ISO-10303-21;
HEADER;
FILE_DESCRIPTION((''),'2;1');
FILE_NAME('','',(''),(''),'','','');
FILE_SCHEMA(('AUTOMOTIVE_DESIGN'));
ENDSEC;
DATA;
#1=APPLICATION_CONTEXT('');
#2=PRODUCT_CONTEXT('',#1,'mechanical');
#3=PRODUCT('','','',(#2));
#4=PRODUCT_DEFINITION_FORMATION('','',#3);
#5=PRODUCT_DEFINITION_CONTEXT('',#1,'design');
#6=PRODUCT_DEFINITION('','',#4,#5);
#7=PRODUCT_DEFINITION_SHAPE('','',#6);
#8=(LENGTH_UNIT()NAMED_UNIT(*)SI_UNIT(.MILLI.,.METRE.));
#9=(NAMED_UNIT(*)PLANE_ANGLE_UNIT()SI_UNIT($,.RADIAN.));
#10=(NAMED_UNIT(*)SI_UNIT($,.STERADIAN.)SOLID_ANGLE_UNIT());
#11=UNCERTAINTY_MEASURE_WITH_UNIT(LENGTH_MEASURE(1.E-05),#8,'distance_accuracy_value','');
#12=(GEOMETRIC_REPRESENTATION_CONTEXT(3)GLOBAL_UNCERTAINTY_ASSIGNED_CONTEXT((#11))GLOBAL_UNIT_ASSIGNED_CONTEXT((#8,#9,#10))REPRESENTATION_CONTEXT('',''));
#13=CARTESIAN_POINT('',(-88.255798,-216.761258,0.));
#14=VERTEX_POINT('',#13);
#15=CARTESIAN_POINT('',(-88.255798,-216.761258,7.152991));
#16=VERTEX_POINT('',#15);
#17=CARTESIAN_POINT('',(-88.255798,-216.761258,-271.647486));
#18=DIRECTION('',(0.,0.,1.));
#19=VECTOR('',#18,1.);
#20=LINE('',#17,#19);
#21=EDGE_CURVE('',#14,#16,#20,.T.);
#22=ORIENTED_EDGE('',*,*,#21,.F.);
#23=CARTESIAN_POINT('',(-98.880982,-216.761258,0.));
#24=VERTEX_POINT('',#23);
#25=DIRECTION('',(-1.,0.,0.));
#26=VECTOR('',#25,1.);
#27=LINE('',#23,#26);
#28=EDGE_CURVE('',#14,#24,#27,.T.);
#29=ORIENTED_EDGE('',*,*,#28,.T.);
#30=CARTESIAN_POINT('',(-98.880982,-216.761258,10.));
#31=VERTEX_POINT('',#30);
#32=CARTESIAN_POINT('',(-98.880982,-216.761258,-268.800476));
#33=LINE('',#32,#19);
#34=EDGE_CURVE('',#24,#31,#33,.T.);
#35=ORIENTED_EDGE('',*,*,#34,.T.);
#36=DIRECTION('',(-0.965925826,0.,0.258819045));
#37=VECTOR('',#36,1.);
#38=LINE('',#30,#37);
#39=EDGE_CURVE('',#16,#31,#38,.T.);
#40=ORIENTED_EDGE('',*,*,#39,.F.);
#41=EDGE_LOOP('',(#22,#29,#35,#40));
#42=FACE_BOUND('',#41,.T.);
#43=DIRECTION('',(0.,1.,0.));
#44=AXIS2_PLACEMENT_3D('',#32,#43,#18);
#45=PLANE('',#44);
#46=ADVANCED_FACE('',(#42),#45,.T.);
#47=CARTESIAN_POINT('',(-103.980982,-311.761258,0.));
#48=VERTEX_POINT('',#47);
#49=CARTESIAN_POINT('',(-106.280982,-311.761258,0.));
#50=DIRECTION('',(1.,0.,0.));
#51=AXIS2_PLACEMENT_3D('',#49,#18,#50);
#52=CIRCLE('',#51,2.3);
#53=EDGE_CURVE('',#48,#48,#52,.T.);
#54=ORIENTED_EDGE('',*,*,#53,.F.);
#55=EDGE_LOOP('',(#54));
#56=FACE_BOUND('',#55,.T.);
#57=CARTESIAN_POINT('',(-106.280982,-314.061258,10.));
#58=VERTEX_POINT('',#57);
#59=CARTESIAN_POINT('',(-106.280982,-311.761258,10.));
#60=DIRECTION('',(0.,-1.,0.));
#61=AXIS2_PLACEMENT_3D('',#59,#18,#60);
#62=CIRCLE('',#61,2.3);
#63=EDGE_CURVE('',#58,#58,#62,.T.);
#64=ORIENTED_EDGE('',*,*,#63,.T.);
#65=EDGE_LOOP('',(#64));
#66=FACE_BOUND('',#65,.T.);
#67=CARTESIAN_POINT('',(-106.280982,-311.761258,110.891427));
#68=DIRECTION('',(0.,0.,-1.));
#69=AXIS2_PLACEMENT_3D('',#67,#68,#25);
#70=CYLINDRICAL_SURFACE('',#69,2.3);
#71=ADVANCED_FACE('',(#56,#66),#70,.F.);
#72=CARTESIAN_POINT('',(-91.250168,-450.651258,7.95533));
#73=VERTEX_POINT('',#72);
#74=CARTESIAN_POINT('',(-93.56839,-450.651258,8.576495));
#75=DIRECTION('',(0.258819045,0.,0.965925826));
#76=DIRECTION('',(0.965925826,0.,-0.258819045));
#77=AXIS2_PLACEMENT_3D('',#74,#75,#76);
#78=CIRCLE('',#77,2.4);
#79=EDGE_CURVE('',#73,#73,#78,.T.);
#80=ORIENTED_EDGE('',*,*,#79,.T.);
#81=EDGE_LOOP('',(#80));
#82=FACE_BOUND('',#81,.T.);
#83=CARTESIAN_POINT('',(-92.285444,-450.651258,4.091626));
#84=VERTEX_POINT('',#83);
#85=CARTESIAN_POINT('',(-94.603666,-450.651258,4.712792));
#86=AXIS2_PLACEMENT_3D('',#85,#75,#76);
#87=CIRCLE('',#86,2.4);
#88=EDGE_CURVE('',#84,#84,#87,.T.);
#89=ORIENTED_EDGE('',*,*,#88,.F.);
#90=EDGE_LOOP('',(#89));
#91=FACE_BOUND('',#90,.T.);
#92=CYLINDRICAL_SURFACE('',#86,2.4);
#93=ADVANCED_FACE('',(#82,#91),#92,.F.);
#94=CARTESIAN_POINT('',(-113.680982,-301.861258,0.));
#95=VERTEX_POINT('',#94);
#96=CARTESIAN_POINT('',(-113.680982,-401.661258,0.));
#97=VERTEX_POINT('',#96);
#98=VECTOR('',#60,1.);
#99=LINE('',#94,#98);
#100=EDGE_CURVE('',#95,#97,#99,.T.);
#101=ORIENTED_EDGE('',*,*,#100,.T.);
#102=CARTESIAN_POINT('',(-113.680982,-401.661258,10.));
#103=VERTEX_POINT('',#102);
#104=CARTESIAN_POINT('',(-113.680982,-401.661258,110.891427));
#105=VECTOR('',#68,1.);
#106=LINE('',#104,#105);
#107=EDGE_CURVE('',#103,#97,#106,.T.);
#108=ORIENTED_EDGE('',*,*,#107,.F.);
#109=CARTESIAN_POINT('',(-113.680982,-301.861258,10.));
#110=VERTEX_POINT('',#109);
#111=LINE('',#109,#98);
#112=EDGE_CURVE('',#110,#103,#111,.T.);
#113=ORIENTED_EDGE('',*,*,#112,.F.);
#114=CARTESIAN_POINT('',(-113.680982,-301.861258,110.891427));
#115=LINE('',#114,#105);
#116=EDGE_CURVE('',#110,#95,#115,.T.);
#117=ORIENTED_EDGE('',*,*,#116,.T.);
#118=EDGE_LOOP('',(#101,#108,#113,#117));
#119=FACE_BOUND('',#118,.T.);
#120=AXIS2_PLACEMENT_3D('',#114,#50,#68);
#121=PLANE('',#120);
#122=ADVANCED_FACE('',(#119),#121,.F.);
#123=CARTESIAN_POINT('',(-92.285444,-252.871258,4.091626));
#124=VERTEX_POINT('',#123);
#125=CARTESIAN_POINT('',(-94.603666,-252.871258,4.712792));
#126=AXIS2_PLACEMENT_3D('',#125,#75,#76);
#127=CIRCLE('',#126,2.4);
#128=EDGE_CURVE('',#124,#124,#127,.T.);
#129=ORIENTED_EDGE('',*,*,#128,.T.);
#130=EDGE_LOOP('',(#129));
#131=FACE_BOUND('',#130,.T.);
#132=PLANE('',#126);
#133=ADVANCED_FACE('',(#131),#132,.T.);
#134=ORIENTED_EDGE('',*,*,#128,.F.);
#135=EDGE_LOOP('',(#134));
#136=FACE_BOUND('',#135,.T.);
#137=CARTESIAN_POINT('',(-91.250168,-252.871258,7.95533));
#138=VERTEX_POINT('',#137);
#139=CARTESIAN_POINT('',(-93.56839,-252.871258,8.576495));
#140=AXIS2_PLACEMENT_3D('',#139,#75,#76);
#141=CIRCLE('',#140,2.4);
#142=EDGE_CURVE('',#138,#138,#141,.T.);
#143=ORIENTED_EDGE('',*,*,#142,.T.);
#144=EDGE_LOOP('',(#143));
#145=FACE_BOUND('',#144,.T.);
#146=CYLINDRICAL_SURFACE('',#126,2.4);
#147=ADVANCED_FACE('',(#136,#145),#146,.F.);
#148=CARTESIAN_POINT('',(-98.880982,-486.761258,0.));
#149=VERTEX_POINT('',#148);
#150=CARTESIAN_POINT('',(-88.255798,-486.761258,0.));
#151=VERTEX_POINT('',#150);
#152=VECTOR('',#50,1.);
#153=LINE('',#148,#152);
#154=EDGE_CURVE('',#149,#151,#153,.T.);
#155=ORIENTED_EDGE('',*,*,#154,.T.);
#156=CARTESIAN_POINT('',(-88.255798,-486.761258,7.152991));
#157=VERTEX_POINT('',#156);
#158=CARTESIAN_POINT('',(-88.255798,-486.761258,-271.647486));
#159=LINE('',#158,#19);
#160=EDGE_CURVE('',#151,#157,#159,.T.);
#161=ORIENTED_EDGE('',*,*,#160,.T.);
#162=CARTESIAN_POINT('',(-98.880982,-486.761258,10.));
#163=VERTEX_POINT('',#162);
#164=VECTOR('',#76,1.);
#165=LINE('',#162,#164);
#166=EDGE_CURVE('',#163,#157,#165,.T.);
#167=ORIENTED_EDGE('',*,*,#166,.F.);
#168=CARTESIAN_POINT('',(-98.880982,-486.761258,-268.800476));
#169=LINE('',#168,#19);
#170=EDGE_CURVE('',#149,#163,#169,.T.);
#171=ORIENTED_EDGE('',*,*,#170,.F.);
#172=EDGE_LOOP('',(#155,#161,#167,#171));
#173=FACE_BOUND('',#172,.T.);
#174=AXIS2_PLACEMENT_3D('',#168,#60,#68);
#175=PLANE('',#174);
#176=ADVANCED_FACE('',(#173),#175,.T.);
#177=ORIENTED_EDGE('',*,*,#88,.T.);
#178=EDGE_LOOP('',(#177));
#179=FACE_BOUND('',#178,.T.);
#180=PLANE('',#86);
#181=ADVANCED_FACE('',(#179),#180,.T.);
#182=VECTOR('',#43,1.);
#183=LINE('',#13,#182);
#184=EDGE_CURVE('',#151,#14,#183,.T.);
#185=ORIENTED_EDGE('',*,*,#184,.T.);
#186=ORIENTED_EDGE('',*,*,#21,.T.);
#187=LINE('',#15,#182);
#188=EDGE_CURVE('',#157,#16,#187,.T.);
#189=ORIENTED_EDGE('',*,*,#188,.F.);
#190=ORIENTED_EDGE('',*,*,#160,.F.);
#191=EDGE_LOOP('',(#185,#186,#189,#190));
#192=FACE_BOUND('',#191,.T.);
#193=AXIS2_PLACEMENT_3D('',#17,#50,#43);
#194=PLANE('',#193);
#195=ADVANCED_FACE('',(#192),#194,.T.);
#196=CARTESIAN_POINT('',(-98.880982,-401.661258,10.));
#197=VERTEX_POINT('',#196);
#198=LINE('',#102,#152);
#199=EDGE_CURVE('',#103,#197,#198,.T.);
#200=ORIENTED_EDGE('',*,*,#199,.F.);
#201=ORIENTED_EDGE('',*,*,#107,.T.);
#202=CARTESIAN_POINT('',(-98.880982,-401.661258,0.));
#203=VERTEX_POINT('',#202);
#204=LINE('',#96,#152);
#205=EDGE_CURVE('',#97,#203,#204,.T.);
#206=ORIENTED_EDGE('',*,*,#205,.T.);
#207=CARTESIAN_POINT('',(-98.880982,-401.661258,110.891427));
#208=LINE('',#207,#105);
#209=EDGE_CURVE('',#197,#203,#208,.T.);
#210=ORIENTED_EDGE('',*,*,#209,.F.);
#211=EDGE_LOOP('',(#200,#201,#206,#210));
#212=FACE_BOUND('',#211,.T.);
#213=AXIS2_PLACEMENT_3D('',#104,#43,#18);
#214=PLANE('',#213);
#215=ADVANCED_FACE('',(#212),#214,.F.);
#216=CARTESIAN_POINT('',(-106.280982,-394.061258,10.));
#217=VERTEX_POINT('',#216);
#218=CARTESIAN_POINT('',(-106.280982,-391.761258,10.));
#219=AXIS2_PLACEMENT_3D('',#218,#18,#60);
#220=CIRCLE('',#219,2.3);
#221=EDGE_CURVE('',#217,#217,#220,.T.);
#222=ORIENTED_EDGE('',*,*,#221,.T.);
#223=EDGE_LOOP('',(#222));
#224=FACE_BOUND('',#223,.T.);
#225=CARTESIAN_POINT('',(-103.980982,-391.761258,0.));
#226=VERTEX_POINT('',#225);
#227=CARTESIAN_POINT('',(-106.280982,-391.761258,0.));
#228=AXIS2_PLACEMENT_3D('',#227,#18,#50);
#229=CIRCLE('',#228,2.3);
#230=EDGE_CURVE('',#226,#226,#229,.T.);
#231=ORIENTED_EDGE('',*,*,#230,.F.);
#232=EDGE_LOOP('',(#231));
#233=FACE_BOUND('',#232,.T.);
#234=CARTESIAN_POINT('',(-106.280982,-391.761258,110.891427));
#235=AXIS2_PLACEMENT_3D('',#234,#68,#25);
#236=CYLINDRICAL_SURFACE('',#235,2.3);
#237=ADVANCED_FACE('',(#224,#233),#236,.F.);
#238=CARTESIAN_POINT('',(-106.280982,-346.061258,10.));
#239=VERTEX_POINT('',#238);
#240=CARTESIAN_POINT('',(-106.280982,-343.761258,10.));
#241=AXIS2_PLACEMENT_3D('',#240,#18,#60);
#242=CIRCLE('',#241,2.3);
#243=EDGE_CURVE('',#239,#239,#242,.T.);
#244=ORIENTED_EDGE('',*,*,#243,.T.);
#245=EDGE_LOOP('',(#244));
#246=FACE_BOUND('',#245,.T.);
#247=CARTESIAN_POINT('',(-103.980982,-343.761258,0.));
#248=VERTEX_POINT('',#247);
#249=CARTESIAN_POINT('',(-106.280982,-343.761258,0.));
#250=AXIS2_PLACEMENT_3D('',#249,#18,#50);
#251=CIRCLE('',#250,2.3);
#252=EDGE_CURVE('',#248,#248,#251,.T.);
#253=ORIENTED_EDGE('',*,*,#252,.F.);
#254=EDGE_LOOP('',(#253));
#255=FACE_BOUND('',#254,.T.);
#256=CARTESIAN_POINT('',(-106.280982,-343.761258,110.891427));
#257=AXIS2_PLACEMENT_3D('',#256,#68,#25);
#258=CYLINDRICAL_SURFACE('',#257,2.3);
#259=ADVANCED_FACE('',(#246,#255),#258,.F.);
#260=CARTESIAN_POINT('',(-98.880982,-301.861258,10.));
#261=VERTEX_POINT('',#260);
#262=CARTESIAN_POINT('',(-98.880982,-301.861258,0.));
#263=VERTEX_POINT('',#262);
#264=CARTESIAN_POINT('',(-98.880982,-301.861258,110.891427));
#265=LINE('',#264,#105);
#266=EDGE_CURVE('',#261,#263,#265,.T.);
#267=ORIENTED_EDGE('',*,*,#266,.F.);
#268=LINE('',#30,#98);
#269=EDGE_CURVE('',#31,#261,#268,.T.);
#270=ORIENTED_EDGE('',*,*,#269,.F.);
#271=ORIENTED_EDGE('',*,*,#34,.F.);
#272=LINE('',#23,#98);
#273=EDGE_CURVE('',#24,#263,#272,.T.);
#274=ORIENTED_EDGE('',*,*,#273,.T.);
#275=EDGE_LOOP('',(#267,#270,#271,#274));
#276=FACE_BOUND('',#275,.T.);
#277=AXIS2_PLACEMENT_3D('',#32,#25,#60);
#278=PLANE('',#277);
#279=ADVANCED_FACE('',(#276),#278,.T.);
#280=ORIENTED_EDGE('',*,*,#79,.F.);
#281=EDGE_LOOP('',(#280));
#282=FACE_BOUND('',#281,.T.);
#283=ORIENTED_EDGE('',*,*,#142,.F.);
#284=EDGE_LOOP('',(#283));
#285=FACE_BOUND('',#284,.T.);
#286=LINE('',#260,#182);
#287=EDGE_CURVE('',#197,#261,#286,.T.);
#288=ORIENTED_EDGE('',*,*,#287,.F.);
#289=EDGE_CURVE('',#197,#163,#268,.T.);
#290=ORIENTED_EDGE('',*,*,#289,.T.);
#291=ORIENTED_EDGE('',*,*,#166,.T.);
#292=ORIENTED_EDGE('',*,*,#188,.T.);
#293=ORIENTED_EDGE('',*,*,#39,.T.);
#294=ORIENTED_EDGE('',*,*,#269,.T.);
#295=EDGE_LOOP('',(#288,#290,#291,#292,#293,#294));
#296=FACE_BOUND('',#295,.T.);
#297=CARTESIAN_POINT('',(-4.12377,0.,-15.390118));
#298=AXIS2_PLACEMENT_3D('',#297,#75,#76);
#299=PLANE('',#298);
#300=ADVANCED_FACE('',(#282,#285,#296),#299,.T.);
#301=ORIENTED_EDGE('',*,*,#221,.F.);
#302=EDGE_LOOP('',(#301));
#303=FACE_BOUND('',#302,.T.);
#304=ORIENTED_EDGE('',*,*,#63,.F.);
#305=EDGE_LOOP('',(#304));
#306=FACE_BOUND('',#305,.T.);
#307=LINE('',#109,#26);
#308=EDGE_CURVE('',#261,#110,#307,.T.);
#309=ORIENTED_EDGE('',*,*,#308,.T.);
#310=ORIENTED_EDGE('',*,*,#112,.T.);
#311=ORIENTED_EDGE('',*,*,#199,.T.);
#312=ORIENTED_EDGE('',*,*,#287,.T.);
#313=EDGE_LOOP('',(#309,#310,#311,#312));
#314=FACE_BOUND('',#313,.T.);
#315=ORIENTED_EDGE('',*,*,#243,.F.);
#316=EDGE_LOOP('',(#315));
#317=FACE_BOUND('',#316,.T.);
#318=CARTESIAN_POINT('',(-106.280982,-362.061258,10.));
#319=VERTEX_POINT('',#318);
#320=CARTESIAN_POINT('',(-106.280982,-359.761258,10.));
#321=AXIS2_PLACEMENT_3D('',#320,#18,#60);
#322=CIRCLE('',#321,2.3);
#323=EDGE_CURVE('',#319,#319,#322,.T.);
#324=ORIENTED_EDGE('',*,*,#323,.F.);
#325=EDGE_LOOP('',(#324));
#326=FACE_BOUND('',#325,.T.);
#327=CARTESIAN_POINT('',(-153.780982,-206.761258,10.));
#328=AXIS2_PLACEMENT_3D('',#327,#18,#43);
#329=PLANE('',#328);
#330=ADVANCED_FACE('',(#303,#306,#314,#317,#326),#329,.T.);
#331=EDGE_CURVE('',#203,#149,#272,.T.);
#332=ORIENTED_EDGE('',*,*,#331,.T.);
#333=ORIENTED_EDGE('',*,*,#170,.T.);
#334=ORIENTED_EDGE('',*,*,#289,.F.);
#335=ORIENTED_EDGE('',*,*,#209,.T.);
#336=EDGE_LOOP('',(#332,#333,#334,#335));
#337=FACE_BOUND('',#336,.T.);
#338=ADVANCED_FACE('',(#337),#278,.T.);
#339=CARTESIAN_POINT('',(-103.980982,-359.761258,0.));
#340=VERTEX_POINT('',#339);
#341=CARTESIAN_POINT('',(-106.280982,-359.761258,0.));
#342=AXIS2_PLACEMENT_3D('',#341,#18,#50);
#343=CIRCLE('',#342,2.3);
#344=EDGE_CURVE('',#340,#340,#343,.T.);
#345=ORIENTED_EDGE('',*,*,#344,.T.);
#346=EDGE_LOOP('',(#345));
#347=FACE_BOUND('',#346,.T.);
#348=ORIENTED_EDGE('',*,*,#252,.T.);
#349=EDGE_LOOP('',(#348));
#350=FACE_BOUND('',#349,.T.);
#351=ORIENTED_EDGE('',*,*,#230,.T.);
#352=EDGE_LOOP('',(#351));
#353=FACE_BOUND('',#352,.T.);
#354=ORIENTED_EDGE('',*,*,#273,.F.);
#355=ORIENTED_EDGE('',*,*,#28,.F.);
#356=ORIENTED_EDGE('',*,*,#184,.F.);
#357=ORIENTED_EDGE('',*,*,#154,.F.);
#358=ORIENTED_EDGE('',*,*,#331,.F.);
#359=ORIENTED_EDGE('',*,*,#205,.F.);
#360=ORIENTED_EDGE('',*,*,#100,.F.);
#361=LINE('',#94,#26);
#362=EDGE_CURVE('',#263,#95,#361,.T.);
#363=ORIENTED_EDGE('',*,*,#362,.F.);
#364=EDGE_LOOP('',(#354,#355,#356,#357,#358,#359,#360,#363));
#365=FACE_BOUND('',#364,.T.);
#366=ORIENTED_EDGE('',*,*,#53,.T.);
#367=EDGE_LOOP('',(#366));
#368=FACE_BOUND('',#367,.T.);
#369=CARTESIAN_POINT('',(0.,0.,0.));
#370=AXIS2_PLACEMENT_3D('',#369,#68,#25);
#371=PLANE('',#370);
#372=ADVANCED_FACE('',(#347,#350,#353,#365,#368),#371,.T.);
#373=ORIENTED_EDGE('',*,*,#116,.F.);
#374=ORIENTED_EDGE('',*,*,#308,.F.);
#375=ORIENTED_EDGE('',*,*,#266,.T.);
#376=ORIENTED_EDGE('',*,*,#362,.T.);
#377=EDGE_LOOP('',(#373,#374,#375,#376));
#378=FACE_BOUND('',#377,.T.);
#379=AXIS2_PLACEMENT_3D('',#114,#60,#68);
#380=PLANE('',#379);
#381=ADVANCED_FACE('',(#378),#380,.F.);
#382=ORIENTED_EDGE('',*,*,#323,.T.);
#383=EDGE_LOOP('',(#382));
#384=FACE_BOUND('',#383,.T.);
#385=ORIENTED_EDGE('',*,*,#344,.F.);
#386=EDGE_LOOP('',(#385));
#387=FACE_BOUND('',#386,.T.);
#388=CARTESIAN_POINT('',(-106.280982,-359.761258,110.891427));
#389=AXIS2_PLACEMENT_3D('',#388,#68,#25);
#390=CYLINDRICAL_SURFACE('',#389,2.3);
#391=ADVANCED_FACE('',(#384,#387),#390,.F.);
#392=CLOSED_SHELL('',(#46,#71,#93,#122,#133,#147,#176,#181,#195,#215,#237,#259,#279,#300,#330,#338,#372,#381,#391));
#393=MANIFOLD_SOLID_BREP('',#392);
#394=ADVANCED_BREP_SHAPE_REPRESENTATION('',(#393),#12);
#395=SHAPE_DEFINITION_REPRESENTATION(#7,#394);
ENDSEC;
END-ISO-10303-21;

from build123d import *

# Parameters (mm, degrees)
SKETCH2_W           = 14.8
SKETCH2_H           = 99.8
BOSS_EXTRUDE1_DEPTH = 10
BOSS_EXTRUDE2_START = -486.761258468
BOSS_EXTRUDE2_DEPTH = 270
SKETCH5_R           = 2.4
CUT_EXTRUDE1_DEPTH  = 4


# Read off the part's stored shape, not the designer's step: Boss-Extrude2
with BuildPart() as part:
    # Sketch2 → Boss-Extrude1 (new body)
    with BuildSketch(Plane.XY):
        with Locations((-106.280981946, -351.761258468)):
            Rectangle(SKETCH2_W, SKETCH2_H)
        with BuildLine():
            ThreePointArc((-103.980981946, -391.761258468), (-106.280981946, -389.461258468), (-108.580981946, -391.761258468))
            ThreePointArc((-108.580981946, -391.761258468), (-106.280981946, -394.061258468), (-103.980981946, -391.761258468))
        make_face(mode=Mode.SUBTRACT)
        with BuildLine():
            ThreePointArc((-108.580981946, -359.761258468), (-106.280981946, -362.061258468), (-103.980981946, -359.761258468))
            ThreePointArc((-103.980981946, -359.761258468), (-106.280981946, -357.461258468), (-108.580981946, -359.761258468))
        make_face(mode=Mode.SUBTRACT)
        with BuildLine():
            ThreePointArc((-108.580981946, -343.761258468), (-106.280981946, -346.061258468), (-103.980981946, -343.761258468))
            ThreePointArc((-103.980981946, -343.761258468), (-106.280981946, -341.461258468), (-108.580981946, -343.761258468))
        make_face(mode=Mode.SUBTRACT)
        with BuildLine():
            ThreePointArc((-108.580981946, -311.761258468), (-106.280981946, -314.061258468), (-103.980981946, -311.761258468))
            ThreePointArc((-103.980981946, -311.761258468), (-106.280981946, -309.461258468), (-108.580981946, -311.761258468))
        make_face(mode=Mode.SUBTRACT)
    extrude(amount=BOSS_EXTRUDE1_DEPTH)

    # Boss-Extrude2 outline → Boss-Extrude2 (add)
    with BuildSketch(Plane(origin=(0, 0, 0), x_dir=(1, 0, 0), z_dir=(0, 1, 0)).offset(BOSS_EXTRUDE2_START)):
        Polygon((-88.255797857, -7.152990504), (-88.255797857, 0), (-98.880981946, 0), (-98.880981946, -10), align=None)
    extrude(amount=BOSS_EXTRUDE2_DEPTH)

    # Sketch5 → Cut-Extrude1 (cut)
    with BuildSketch(Plane(origin=(-4.123769815, 0, -15.390118468), x_dir=(0.9659258262890692, 0, -0.25881904510251785), z_dir=(0.25881904510251785, 0, 0.9659258262890692))):
        with Locations((-92.599884641, -252.871258468)):
            Circle(SKETCH5_R)
        with Locations((-92.599884641, -450.651258468)):
            Circle(SKETCH5_R)
    extrude(amount=-CUT_EXTRUDE1_DEPTH, mode=Mode.SUBTRACT)


solid = part.part
